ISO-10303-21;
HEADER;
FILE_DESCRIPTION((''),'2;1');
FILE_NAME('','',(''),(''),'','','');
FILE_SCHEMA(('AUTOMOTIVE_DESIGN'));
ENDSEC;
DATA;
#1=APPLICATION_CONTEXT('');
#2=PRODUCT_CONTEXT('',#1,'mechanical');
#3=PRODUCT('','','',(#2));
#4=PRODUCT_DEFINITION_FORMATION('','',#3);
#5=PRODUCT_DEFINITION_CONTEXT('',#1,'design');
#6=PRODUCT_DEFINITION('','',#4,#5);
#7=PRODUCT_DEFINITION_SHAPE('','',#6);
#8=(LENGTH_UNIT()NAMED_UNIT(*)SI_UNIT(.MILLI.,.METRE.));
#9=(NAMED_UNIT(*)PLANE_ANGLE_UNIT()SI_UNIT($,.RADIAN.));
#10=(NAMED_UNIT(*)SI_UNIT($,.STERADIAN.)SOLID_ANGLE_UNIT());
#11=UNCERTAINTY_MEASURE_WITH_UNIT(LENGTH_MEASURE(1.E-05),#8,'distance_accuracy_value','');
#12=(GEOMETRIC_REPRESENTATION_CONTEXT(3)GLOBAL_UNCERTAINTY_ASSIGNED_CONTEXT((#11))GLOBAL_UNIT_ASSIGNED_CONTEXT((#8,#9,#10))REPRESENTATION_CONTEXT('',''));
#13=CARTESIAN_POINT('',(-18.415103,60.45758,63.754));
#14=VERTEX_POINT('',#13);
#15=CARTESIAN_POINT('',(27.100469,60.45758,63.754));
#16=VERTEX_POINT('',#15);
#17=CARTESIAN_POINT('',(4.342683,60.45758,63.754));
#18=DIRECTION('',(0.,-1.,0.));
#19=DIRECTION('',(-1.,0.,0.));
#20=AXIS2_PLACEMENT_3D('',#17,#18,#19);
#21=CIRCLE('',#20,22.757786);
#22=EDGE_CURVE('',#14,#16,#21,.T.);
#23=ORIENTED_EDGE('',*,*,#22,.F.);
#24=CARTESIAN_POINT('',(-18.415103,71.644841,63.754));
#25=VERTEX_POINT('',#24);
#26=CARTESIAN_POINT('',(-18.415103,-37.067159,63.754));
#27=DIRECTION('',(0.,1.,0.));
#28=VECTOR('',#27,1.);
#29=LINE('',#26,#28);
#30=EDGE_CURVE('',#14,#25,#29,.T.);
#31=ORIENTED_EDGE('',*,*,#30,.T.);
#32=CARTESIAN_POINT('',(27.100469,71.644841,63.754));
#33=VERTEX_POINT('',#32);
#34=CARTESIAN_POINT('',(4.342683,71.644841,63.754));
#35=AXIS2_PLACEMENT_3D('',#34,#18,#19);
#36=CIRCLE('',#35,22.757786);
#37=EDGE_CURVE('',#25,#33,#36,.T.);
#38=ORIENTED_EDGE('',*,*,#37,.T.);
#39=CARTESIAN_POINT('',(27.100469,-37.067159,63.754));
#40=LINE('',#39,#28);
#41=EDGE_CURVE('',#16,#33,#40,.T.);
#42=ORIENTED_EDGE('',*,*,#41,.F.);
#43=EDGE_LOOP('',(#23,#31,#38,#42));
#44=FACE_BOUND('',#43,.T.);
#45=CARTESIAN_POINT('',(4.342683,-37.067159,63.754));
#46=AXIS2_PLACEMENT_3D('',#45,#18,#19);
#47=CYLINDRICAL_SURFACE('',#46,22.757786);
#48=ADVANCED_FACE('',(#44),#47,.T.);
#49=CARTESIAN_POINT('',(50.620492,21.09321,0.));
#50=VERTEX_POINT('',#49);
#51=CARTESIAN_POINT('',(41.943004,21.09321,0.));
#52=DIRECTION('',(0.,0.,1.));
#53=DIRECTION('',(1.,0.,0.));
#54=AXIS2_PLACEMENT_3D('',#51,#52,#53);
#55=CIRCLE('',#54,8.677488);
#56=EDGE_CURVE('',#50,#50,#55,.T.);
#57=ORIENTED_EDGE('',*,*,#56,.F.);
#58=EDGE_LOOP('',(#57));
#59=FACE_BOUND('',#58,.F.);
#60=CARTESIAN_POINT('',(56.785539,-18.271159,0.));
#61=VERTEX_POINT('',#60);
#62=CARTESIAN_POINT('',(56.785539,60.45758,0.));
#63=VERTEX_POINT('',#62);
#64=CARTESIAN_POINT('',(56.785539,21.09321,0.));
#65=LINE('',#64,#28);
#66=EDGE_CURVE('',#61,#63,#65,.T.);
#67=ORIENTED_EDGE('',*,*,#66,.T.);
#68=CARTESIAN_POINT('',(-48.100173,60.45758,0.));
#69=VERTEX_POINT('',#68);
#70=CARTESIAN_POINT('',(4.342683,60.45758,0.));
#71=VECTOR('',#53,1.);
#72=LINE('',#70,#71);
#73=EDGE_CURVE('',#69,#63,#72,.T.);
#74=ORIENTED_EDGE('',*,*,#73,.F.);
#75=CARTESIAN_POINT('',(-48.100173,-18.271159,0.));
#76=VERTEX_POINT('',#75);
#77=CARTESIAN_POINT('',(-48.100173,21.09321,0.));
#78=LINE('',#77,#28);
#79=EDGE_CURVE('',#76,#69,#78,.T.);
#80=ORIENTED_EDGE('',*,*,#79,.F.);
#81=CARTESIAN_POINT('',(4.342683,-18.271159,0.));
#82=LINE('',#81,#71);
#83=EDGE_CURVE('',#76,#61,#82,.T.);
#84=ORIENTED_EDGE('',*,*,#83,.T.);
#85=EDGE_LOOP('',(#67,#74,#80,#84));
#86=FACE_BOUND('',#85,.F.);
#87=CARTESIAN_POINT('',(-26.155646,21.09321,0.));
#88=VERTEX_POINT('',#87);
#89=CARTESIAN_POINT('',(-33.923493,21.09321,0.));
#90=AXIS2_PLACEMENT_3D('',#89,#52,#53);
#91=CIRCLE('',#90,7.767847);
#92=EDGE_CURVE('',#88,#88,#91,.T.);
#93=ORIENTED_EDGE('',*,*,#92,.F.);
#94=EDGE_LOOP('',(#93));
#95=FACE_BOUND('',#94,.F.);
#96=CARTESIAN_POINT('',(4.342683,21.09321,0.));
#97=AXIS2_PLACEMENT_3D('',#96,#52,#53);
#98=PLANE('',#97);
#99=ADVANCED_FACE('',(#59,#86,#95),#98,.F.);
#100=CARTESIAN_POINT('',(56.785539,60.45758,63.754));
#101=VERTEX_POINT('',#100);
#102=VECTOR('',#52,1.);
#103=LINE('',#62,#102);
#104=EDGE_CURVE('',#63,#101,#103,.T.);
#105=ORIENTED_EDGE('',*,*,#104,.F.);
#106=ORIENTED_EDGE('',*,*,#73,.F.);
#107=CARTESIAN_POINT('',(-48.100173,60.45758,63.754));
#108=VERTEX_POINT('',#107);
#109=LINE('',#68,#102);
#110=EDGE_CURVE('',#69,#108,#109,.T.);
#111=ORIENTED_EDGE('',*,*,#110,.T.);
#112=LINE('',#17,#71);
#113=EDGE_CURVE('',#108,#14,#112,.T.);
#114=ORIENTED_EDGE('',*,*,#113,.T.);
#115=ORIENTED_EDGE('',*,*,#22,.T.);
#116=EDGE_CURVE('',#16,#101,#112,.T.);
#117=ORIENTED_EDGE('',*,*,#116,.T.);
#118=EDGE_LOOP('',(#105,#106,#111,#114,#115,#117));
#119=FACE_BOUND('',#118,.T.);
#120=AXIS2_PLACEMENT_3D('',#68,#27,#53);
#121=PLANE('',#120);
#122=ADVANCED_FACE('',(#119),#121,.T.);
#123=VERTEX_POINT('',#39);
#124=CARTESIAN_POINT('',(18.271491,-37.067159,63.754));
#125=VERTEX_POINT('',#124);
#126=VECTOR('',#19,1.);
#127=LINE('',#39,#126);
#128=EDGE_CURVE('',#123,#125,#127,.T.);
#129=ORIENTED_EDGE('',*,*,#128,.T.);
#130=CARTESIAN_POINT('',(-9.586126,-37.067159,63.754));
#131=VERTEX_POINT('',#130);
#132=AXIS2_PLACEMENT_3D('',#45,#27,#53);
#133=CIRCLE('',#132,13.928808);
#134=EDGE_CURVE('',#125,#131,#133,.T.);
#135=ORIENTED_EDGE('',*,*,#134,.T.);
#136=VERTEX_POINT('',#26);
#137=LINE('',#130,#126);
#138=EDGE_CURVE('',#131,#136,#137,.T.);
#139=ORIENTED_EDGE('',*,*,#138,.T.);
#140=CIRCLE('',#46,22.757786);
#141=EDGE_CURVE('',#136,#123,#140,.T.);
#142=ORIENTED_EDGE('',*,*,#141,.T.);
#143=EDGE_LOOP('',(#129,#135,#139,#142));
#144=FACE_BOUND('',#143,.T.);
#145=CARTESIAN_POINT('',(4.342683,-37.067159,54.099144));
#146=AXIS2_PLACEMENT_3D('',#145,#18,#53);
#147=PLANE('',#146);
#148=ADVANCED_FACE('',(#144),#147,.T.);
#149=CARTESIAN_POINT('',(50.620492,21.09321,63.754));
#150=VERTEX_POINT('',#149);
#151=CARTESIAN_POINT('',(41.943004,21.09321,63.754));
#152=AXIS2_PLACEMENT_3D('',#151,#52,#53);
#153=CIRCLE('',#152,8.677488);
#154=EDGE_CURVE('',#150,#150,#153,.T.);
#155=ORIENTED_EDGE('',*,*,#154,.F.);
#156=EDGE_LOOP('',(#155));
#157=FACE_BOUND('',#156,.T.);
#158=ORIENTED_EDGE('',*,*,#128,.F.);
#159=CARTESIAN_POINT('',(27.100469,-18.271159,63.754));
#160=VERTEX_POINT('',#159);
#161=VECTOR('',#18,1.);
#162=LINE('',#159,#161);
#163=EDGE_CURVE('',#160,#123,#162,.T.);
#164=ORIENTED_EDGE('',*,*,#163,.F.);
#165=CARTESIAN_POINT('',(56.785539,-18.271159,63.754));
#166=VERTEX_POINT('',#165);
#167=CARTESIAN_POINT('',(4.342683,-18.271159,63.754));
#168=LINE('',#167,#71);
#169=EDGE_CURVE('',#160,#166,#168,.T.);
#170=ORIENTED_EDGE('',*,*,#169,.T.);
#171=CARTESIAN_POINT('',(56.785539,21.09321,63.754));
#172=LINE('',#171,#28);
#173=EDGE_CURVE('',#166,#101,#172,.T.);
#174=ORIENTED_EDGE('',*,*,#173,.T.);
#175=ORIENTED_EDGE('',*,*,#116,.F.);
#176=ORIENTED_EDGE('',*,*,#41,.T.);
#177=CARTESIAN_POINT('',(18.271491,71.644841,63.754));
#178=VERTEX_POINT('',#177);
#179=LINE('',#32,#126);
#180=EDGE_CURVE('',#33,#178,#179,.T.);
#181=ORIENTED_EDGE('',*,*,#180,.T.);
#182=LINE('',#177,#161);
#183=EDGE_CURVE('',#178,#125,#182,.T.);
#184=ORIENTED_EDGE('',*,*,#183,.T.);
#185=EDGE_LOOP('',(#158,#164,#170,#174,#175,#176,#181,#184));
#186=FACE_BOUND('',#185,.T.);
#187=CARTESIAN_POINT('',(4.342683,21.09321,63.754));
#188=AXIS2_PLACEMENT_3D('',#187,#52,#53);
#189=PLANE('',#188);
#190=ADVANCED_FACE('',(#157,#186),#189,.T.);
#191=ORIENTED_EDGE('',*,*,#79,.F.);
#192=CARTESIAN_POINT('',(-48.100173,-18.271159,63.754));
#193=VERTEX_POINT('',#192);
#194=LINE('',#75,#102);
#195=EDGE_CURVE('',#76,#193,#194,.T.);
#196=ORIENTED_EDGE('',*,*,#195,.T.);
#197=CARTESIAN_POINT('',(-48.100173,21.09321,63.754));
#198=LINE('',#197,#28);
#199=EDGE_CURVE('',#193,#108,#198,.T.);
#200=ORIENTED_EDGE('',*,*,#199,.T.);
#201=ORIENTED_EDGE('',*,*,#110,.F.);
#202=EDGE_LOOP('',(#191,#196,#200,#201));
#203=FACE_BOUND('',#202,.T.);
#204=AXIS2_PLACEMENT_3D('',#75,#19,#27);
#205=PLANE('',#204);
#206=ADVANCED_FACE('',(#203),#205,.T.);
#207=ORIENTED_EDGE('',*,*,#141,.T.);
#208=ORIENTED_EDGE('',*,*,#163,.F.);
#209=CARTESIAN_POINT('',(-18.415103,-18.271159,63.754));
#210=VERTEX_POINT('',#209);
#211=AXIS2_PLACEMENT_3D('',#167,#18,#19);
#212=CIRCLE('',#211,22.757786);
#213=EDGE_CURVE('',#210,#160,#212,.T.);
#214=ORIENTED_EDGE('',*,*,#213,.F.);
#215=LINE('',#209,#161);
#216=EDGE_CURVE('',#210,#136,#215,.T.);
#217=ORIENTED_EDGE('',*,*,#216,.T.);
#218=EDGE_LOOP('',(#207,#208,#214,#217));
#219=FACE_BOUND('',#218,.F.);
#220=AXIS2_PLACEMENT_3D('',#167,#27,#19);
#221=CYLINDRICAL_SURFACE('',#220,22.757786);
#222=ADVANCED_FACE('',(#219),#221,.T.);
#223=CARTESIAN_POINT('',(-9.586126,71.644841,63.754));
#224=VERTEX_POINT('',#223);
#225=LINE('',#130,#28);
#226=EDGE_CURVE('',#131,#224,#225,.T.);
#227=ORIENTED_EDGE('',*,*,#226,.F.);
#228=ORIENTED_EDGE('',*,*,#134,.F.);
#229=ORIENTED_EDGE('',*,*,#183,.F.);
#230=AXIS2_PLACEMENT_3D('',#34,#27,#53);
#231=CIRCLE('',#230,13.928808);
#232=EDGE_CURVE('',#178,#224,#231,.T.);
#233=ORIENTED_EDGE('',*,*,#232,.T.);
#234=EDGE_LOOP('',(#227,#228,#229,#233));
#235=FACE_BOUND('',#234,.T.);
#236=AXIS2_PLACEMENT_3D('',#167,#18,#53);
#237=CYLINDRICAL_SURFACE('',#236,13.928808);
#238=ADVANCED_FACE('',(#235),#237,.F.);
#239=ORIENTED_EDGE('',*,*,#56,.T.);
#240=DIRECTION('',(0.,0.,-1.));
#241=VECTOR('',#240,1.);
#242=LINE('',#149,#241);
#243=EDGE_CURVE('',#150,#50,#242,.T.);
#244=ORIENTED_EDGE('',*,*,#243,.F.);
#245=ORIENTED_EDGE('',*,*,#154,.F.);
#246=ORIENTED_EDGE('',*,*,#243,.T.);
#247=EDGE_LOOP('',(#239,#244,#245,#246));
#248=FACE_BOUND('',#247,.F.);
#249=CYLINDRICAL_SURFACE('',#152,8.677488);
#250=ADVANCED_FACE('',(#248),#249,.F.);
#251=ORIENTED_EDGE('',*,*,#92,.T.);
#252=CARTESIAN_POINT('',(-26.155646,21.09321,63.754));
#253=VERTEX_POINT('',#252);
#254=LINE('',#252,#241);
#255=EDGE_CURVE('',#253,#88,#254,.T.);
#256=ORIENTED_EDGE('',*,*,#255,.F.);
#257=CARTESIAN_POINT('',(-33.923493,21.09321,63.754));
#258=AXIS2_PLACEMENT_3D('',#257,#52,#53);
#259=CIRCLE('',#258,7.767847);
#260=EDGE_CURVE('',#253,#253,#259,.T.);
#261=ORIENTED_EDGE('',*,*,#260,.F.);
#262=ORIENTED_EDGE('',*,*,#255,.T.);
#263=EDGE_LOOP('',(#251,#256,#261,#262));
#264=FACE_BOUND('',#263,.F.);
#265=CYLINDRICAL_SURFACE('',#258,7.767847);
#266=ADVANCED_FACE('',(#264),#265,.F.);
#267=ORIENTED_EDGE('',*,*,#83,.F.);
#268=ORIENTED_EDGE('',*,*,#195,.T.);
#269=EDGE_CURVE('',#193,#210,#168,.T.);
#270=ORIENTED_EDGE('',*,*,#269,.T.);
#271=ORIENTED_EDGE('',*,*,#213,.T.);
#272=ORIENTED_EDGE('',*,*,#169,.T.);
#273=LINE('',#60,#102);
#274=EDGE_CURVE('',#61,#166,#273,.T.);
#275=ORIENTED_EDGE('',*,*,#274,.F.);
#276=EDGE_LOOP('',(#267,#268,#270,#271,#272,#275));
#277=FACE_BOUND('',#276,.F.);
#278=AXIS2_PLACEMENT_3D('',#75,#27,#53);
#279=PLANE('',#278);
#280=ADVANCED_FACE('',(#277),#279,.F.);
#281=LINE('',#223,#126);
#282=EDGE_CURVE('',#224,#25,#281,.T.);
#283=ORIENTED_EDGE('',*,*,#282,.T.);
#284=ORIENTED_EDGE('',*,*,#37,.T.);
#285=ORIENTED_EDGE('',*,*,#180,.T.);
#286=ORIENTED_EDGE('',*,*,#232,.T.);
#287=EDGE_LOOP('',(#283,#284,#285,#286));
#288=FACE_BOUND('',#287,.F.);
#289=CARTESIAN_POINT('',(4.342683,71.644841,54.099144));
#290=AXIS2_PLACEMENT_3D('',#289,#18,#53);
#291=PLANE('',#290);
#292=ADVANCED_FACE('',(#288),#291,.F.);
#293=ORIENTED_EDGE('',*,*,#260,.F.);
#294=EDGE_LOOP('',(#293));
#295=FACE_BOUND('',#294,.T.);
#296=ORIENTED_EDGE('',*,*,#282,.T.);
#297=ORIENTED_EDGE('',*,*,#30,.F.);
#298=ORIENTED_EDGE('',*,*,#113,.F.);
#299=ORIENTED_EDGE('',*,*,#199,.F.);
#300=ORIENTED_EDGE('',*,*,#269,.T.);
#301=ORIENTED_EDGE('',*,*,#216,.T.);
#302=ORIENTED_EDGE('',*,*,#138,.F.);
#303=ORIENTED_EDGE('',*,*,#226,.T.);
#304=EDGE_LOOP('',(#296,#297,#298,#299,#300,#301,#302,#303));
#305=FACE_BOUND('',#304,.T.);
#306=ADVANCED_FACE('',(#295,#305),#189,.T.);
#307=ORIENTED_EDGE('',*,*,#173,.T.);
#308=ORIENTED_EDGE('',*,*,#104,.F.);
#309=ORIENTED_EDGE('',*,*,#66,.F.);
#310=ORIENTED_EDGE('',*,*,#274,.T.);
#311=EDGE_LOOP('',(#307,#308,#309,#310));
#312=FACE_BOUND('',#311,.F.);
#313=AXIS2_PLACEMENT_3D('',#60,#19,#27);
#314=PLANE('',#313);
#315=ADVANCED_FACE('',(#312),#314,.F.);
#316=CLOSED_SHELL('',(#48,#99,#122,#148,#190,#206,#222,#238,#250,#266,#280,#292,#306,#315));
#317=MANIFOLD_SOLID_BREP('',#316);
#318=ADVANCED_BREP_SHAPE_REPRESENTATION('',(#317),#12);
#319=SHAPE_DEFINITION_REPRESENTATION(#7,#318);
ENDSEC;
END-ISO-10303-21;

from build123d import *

# Parameters (mm, degrees)
F0_W     = 104.885712266
F0_H     = 78.7287391722
F1_DEPTH = 63.754
F3_DEPTH = 18.796
F4_DEPTH = 105.156
F5_DEPTH = 108.712
F6_R     = 7.7678468682
F6_R_2   = 8.6774880562
F7_DEPTH = 90.17


with BuildPart() as f1:
    # F0 (on Top) → F1 (new body)
    with BuildSketch(Plane.XY):
        with Locations((4.3426826596, 21.0932102054)):
            Rectangle(F0_W, F0_H)
    extrude(amount=F1_DEPTH)

    # F2 (on face) → F3 (join)
    with BuildSketch(Plane.XZ.offset(18.2711593807)):
        with BuildLine():
            Line((-9.586125523, 63.754), (-18.415103221, 63.754))
            ThreePointArc((-18.415103221, 63.754), (4.3426826596, 40.9962141193), (27.1004685403, 63.754))
            Line((27.1004685403, 63.754), (18.2714908423, 63.754))
            ThreePointArc((18.2714908423, 63.754), (4.3426826596, 49.8251918173), (-9.586125523, 63.754))
        make_face()
    extrude(amount=F3_DEPTH)

    # F4 (cut): a face of the model
    f4_faces = [f1.faces().sort_by_distance(p)[0] for p in [
        (4.3426826596, -18.2711593807, 57.8424302036),
    ]]
    extrude(f4_faces, amount=-F4_DEPTH, mode=Mode.SUBTRACT)

    # F5 (add): a face of the model
    f5_faces = [f1.faces().sort_by_distance(p)[0] for p in [
        (22.6859796913, -37.0671593807, 63.2451204375),
    ]]
    extrude(f5_faces, amount=-F5_DEPTH)

    # F6 (on face) → F7 (cut)
    with BuildSketch(Plane.XY.offset(63.754)):
        with Locations((-33.9234930099, 21.0932102054)):
            Circle(F6_R)
        with Locations((41.9430036665, 21.0932102054)):
            Circle(F6_R_2)
    extrude(amount=-F7_DEPTH, mode=Mode.SUBTRACT)


solid = f1.part
